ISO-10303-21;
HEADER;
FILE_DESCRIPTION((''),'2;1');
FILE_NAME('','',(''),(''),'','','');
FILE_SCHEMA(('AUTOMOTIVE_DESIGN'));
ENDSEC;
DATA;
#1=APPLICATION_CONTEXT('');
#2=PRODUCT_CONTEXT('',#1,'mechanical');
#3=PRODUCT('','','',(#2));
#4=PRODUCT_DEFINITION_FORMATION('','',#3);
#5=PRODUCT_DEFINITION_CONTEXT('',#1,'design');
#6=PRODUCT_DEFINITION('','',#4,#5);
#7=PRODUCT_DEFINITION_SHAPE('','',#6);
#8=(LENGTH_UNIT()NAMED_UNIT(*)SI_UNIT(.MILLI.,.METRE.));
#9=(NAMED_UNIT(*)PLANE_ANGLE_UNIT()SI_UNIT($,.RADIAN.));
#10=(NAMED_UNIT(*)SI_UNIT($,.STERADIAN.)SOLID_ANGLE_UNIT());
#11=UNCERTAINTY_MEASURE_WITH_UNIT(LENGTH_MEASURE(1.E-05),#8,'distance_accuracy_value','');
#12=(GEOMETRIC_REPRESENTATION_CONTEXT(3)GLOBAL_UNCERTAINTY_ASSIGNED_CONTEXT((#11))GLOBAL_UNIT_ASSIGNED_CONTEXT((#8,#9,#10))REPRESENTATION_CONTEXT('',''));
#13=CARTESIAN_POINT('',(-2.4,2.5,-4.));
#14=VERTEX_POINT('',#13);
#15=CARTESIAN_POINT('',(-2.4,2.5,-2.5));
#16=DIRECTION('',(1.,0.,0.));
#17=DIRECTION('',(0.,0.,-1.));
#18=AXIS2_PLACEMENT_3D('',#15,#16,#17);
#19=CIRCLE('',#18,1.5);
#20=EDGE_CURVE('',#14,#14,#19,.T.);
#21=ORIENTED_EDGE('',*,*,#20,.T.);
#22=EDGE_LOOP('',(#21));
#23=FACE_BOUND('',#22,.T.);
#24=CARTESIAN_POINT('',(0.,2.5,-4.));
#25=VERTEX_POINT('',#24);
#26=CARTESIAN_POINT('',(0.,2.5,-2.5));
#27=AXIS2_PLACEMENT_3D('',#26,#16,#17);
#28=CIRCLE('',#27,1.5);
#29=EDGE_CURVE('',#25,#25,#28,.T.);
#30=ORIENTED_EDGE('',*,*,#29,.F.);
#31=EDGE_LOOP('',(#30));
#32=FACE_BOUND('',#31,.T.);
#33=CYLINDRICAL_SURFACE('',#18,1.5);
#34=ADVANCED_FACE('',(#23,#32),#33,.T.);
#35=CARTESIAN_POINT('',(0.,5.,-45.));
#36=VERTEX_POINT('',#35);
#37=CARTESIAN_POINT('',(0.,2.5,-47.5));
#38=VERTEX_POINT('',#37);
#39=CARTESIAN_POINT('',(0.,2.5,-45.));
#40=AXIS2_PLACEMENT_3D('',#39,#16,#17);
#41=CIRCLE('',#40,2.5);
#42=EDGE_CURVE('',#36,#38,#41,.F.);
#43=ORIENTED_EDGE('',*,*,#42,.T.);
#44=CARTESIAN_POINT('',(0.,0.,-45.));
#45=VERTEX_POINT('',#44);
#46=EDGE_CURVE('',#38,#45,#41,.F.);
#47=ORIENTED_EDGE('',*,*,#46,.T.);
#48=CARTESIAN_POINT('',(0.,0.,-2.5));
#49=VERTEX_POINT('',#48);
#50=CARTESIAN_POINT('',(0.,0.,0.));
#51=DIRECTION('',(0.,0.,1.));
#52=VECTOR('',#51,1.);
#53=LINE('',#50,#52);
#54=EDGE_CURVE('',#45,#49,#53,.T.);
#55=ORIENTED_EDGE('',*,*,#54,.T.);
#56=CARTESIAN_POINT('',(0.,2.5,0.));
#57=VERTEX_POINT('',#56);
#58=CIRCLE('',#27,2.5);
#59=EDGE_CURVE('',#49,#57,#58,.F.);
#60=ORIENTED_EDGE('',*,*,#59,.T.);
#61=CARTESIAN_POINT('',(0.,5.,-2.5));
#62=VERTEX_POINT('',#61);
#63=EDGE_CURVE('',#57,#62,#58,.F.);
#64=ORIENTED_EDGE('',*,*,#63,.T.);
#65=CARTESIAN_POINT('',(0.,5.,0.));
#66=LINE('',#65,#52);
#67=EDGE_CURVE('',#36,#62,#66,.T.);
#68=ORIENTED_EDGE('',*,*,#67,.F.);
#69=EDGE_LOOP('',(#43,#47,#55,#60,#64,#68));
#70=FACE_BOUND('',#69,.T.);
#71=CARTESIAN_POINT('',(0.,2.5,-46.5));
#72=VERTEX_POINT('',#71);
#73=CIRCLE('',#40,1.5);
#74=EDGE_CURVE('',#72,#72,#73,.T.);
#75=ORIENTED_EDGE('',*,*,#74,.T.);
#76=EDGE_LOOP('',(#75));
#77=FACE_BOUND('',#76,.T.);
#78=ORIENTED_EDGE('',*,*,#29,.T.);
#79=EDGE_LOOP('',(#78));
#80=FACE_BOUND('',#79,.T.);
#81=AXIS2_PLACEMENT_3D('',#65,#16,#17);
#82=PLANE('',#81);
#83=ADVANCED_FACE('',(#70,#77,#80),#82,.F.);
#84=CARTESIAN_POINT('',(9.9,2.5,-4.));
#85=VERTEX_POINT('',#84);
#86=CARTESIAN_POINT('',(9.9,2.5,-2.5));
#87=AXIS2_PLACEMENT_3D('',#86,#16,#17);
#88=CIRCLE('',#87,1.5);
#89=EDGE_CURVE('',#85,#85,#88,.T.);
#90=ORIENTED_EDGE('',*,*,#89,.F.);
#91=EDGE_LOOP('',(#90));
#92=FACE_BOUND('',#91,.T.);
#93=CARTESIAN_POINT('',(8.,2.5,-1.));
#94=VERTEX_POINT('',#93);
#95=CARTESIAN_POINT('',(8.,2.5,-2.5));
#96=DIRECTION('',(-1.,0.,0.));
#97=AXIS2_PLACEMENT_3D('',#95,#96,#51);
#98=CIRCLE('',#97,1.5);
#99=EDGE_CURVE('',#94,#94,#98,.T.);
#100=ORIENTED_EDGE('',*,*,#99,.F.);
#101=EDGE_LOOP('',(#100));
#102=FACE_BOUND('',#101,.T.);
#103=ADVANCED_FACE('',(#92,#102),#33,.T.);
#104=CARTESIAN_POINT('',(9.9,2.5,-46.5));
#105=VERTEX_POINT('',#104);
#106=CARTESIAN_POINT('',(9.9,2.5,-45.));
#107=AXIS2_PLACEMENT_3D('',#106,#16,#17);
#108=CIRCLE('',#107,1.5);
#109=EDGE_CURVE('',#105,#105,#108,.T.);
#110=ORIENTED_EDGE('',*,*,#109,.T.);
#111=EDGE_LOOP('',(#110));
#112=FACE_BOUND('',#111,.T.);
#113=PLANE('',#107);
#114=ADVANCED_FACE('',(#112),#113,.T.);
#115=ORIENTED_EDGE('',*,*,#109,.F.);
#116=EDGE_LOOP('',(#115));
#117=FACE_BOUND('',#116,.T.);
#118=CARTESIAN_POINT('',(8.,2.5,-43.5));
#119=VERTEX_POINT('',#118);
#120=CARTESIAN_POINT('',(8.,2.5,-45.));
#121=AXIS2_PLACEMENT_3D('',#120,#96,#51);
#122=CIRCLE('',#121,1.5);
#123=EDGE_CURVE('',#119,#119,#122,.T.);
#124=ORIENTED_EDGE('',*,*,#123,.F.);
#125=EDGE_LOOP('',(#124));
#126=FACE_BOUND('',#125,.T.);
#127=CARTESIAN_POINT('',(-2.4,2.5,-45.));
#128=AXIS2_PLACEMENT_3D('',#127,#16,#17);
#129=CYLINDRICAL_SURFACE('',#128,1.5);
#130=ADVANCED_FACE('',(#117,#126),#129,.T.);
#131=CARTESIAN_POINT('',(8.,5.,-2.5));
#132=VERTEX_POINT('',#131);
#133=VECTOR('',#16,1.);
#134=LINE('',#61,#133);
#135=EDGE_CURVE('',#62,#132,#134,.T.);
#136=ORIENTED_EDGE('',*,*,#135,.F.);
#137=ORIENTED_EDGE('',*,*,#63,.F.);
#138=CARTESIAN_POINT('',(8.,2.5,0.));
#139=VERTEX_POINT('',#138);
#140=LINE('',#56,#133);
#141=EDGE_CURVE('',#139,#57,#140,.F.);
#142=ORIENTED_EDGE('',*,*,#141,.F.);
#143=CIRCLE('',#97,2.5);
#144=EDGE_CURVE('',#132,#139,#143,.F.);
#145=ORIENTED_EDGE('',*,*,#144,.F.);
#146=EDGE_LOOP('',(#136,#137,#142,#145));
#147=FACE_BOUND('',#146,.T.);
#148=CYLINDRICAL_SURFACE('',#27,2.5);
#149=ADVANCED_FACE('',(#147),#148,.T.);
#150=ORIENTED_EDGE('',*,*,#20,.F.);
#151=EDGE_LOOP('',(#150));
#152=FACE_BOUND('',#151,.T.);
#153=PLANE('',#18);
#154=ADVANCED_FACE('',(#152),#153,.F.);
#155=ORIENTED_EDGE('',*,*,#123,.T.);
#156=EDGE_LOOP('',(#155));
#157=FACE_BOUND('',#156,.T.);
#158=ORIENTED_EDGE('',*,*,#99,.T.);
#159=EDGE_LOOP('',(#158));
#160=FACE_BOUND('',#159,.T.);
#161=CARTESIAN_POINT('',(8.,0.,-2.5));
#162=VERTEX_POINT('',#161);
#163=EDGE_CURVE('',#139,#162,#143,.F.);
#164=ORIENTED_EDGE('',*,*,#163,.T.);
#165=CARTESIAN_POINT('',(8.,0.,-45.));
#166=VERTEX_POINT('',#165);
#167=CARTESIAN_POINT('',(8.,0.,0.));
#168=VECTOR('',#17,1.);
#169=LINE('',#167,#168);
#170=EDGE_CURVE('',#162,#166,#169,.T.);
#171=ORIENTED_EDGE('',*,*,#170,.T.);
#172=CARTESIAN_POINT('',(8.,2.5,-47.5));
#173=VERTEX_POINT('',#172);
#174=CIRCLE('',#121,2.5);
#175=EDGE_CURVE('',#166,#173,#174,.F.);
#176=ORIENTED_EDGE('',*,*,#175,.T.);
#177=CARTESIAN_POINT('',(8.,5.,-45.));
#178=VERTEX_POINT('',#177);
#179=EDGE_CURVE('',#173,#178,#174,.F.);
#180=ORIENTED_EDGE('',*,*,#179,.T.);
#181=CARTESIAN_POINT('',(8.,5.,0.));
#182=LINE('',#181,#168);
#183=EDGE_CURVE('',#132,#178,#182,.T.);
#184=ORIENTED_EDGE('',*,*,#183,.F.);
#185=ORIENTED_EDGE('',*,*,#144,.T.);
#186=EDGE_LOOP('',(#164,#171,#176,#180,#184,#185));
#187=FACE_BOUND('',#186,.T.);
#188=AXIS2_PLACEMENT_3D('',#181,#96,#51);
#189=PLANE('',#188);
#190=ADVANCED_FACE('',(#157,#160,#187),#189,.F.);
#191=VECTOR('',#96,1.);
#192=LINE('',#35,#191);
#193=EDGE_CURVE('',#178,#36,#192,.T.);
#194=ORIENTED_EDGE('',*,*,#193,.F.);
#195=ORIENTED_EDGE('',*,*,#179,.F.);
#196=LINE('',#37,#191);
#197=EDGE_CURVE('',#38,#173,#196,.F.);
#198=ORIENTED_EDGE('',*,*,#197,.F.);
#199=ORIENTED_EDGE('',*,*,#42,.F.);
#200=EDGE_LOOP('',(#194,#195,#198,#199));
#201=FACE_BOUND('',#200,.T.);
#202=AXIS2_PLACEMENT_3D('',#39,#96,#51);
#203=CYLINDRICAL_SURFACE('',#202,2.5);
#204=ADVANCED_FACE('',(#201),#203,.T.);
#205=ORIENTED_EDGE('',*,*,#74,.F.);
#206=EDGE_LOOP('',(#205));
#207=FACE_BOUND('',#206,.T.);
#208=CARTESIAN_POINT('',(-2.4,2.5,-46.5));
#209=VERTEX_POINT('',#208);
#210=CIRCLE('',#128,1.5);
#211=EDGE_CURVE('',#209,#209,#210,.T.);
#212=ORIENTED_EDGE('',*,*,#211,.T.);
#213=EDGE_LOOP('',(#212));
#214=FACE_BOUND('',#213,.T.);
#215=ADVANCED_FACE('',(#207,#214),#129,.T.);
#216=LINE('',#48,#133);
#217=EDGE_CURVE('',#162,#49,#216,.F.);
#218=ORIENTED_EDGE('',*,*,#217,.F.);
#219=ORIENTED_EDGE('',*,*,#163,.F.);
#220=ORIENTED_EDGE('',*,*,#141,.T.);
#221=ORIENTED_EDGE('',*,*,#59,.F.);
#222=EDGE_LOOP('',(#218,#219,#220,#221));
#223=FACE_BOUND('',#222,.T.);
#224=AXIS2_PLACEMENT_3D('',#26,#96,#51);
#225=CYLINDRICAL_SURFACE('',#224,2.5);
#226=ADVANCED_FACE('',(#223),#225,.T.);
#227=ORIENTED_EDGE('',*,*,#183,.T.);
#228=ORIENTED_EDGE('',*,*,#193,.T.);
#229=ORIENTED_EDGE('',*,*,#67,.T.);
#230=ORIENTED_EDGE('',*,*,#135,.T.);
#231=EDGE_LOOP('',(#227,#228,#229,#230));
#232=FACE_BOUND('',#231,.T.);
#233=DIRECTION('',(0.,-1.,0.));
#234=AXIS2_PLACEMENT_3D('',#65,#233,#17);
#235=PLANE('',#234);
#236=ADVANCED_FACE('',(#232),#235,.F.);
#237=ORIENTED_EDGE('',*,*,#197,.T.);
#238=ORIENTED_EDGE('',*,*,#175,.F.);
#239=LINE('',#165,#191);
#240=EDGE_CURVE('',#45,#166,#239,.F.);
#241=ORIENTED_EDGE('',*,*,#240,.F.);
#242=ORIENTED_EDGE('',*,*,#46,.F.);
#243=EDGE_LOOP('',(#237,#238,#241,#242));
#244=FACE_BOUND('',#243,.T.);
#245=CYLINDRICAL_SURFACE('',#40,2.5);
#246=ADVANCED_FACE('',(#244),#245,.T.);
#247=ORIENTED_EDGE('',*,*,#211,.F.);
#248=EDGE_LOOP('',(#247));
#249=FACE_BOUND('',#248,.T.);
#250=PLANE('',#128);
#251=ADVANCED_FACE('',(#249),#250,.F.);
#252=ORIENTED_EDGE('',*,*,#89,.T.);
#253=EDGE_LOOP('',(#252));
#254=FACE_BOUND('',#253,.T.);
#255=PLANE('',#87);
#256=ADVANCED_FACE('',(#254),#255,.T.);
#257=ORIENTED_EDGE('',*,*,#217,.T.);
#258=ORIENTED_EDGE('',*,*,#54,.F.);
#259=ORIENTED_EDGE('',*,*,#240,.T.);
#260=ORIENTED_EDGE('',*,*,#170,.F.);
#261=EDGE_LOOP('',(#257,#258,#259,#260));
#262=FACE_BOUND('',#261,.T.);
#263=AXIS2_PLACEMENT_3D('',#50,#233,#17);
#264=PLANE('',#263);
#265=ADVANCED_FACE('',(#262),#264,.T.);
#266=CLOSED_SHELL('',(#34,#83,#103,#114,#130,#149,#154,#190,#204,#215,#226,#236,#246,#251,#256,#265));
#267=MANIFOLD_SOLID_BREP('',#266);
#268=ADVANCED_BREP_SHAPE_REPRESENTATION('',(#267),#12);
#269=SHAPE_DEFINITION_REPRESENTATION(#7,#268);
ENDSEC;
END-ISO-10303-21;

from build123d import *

# Parameters (mm, degrees)
SKETCH1_W                = 8
SKETCH1_H                = 47.5
BOSS_EXTRUDE1_DEPTH      = 5
BOSS_EXTRUDE2_DEPTH      = 1.9
BOSS_EXTRUDE2_DEPTH_BACK = 10.4
SKETCH2_R                = 1.5
FILLET1_R                = 2.5


with BuildPart() as part:
    # Sketch1 → Boss-Extrude1 (new body)
    with BuildSketch(Plane(origin=(0, 0, 0), x_dir=(1, 0, 0), z_dir=(0, 1, 0))):
        with Locations((4, 23.75)):
            Rectangle(SKETCH1_W, SKETCH1_H)
    extrude(amount=BOSS_EXTRUDE1_DEPTH)

    # Sketch2 → Boss-Extrude2 (add, two sides: drawn at the far end of the back side and taken through both)
    with BuildSketch(Plane(origin=(8, 0, 0), x_dir=(0, 0, -1), z_dir=(1, 0, 0)).offset(-BOSS_EXTRUDE2_DEPTH_BACK)):
        with Locations((2.5, 2.5)):
            Circle(SKETCH2_R)
        with Locations((45, 2.5)):
            Circle(SKETCH2_R)
    extrude(amount=BOSS_EXTRUDE2_DEPTH + BOSS_EXTRUDE2_DEPTH_BACK)

    # Fillet1
    fillet1_edges = [part.edges().sort_by_distance(p)[0] for p in [
        (4, 0, -47.5),
        (4, 5, -47.5),
        (4, 0, 0),
        (4, 5, 0),
    ]]
    fillet(fillet1_edges, radius=FILLET1_R - 0.0001)  # a hair under: the kernel refuses the full size


solid = part.part
